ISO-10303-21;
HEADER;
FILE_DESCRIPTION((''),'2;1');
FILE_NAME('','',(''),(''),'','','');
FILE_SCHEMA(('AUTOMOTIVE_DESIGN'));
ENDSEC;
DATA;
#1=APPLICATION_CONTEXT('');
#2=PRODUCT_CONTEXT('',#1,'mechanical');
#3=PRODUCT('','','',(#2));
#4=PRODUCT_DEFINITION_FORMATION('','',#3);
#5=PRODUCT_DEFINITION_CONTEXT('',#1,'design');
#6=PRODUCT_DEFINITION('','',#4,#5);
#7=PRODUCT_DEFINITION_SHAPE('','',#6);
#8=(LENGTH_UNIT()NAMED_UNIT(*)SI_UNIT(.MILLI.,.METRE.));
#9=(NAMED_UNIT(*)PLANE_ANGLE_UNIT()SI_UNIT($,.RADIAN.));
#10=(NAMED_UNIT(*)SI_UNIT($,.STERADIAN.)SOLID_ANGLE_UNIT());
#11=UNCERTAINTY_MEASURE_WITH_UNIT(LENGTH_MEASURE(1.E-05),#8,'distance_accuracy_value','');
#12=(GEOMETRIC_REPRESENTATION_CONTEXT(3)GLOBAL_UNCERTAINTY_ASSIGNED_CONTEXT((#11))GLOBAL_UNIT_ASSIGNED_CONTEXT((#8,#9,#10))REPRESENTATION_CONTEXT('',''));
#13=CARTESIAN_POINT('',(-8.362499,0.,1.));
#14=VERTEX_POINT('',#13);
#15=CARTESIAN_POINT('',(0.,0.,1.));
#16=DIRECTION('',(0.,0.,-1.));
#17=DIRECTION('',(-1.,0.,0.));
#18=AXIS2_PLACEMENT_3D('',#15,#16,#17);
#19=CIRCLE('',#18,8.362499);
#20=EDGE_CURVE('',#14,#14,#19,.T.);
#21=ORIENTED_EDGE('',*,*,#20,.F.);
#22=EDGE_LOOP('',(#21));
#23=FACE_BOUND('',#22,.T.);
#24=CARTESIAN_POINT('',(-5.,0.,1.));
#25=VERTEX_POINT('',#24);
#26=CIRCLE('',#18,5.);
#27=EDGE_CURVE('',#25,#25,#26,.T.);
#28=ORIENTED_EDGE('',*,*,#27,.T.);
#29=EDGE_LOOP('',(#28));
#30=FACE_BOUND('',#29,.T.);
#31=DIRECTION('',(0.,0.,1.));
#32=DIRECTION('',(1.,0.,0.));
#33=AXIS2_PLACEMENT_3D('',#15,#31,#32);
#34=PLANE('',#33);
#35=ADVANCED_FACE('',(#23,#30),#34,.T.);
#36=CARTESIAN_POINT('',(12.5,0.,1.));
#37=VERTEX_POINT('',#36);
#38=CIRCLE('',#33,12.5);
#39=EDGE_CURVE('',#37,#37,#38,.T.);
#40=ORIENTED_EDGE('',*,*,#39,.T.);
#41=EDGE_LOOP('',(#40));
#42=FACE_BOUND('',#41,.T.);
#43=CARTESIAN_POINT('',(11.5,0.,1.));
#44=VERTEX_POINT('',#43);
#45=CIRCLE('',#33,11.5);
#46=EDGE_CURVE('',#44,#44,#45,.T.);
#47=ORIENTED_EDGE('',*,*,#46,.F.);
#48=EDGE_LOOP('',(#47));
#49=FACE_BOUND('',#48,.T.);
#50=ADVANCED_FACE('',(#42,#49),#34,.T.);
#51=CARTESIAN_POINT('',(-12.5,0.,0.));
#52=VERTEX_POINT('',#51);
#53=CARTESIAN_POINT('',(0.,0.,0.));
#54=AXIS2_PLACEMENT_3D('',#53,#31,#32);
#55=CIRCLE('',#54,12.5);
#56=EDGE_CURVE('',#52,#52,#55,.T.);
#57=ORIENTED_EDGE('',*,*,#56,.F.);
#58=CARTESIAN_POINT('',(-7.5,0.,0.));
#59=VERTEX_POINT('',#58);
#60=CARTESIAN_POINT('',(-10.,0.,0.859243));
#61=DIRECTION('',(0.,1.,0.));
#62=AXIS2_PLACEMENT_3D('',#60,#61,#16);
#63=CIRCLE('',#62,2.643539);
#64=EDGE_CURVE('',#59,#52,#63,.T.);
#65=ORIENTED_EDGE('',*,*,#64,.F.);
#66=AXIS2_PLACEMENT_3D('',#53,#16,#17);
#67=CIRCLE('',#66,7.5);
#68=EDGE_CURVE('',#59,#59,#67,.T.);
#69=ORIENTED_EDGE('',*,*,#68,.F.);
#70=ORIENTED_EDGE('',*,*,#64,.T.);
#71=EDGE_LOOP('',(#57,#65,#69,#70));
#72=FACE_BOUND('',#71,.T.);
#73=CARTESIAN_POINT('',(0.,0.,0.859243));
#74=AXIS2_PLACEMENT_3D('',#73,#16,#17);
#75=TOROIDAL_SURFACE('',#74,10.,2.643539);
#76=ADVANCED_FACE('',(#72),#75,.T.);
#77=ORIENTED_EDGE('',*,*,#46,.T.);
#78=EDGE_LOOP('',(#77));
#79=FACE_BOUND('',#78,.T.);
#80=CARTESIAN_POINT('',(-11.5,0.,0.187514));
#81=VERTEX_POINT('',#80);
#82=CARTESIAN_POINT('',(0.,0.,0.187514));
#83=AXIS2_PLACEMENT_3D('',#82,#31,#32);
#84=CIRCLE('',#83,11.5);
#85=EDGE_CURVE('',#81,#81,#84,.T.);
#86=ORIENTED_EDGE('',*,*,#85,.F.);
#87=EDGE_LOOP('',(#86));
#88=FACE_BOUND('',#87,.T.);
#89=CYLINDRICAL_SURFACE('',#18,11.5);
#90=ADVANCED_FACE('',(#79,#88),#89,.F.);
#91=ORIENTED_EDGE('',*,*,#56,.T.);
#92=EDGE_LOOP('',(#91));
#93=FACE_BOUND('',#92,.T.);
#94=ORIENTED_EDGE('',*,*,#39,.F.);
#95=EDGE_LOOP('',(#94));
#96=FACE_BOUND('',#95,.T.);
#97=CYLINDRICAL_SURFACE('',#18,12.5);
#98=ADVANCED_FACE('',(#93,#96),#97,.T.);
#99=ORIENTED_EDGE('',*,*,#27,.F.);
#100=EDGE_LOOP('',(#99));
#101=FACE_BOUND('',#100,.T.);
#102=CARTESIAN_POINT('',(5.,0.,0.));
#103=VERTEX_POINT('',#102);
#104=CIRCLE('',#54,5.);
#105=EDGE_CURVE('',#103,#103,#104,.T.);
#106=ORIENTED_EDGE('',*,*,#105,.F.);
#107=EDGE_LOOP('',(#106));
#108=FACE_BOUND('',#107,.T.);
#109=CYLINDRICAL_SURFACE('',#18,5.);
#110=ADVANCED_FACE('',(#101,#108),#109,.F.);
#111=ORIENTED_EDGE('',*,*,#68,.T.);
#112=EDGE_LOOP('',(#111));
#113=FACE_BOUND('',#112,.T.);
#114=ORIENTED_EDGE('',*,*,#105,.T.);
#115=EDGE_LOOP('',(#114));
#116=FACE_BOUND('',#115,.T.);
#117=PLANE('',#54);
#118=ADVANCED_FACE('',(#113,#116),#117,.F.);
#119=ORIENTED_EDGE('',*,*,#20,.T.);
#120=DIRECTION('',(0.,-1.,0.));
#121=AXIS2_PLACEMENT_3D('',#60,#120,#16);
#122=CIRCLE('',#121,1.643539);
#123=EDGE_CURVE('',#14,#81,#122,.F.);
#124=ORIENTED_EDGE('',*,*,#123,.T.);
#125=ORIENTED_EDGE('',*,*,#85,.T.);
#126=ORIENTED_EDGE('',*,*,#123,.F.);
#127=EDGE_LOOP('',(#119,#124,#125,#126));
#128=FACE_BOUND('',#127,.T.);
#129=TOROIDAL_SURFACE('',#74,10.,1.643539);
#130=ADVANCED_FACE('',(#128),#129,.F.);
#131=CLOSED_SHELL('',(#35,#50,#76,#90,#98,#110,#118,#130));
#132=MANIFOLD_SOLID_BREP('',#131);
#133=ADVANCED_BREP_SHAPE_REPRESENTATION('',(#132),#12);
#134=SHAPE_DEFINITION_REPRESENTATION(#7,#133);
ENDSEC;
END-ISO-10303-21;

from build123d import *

# Parameters (mm, degrees)
SKETCH_1_R               = 12.5
EXTRUDE_1_DEPTH          = 1
CUT_EXTRUDE_1_DEPTH      = 18.767490446
CUT_EXTRUDE_1_DEPTH_BACK = 18.767490446
SKETCH_4_R               = 5


# Read off the part's stored shape, not the designer's step: 抽壳1
with BuildPart() as part:
    # 草图1 → 凸台-拉伸1 (new body)
    with BuildSketch(Plane.XY):
        Circle(SKETCH_1_R)
    extrude(amount=EXTRUDE_1_DEPTH)

    # 扫描1: sweep along a path in 草图2
    with BuildLine(Plane(origin=(0, 0, 0), x_dir=(-1, 0, 0), z_dir=(0, 0, -1))) as sweep_1_path:
        CenterArc((0, 0), 12.5, 0, 360)
    # 草图3 → 扫描1 (sweep)
    with BuildSketch(Plane(origin=(0, 0, 0), x_dir=(1, 0, 0), z_dir=(0, 1, 0))):
        with BuildLine():
            Line((-12.5, 0), (-7.5, 0))
            ThreePointArc((-7.5, 0), (-10, 1.784295774), (-12.5, 0))
        make_face()
    sweep(path=sweep_1_path.line)

    # 抽壳1 outline → 抽壳1 (revolve, cut)
    with BuildSketch(Plane.XZ):
        with BuildLine():
            Line((11.5, 0.18751359), (11.5, 1))
            Line((11.5, 1), (8.362499328, 1))
            ThreePointArc((8.362499328, 1), (9.587980401, -0.731813124), (11.5, 0.18751359))
        make_face()
    revolve(axis=Axis((0, 0, 0), (0, 0, 1)), mode=Mode.SUBTRACT)

    # 草图4 → 切除-拉伸1 (cut, two sides: drawn at the far end of the back side and taken through both)
    with BuildSketch(Plane(origin=(0, 0, 0), x_dir=(-1, 0, 0), z_dir=(0, 0, -1)).offset(-CUT_EXTRUDE_1_DEPTH_BACK)):
        Circle(SKETCH_4_R)
    extrude(amount=CUT_EXTRUDE_1_DEPTH + CUT_EXTRUDE_1_DEPTH_BACK, mode=Mode.SUBTRACT)


solid = part.part
